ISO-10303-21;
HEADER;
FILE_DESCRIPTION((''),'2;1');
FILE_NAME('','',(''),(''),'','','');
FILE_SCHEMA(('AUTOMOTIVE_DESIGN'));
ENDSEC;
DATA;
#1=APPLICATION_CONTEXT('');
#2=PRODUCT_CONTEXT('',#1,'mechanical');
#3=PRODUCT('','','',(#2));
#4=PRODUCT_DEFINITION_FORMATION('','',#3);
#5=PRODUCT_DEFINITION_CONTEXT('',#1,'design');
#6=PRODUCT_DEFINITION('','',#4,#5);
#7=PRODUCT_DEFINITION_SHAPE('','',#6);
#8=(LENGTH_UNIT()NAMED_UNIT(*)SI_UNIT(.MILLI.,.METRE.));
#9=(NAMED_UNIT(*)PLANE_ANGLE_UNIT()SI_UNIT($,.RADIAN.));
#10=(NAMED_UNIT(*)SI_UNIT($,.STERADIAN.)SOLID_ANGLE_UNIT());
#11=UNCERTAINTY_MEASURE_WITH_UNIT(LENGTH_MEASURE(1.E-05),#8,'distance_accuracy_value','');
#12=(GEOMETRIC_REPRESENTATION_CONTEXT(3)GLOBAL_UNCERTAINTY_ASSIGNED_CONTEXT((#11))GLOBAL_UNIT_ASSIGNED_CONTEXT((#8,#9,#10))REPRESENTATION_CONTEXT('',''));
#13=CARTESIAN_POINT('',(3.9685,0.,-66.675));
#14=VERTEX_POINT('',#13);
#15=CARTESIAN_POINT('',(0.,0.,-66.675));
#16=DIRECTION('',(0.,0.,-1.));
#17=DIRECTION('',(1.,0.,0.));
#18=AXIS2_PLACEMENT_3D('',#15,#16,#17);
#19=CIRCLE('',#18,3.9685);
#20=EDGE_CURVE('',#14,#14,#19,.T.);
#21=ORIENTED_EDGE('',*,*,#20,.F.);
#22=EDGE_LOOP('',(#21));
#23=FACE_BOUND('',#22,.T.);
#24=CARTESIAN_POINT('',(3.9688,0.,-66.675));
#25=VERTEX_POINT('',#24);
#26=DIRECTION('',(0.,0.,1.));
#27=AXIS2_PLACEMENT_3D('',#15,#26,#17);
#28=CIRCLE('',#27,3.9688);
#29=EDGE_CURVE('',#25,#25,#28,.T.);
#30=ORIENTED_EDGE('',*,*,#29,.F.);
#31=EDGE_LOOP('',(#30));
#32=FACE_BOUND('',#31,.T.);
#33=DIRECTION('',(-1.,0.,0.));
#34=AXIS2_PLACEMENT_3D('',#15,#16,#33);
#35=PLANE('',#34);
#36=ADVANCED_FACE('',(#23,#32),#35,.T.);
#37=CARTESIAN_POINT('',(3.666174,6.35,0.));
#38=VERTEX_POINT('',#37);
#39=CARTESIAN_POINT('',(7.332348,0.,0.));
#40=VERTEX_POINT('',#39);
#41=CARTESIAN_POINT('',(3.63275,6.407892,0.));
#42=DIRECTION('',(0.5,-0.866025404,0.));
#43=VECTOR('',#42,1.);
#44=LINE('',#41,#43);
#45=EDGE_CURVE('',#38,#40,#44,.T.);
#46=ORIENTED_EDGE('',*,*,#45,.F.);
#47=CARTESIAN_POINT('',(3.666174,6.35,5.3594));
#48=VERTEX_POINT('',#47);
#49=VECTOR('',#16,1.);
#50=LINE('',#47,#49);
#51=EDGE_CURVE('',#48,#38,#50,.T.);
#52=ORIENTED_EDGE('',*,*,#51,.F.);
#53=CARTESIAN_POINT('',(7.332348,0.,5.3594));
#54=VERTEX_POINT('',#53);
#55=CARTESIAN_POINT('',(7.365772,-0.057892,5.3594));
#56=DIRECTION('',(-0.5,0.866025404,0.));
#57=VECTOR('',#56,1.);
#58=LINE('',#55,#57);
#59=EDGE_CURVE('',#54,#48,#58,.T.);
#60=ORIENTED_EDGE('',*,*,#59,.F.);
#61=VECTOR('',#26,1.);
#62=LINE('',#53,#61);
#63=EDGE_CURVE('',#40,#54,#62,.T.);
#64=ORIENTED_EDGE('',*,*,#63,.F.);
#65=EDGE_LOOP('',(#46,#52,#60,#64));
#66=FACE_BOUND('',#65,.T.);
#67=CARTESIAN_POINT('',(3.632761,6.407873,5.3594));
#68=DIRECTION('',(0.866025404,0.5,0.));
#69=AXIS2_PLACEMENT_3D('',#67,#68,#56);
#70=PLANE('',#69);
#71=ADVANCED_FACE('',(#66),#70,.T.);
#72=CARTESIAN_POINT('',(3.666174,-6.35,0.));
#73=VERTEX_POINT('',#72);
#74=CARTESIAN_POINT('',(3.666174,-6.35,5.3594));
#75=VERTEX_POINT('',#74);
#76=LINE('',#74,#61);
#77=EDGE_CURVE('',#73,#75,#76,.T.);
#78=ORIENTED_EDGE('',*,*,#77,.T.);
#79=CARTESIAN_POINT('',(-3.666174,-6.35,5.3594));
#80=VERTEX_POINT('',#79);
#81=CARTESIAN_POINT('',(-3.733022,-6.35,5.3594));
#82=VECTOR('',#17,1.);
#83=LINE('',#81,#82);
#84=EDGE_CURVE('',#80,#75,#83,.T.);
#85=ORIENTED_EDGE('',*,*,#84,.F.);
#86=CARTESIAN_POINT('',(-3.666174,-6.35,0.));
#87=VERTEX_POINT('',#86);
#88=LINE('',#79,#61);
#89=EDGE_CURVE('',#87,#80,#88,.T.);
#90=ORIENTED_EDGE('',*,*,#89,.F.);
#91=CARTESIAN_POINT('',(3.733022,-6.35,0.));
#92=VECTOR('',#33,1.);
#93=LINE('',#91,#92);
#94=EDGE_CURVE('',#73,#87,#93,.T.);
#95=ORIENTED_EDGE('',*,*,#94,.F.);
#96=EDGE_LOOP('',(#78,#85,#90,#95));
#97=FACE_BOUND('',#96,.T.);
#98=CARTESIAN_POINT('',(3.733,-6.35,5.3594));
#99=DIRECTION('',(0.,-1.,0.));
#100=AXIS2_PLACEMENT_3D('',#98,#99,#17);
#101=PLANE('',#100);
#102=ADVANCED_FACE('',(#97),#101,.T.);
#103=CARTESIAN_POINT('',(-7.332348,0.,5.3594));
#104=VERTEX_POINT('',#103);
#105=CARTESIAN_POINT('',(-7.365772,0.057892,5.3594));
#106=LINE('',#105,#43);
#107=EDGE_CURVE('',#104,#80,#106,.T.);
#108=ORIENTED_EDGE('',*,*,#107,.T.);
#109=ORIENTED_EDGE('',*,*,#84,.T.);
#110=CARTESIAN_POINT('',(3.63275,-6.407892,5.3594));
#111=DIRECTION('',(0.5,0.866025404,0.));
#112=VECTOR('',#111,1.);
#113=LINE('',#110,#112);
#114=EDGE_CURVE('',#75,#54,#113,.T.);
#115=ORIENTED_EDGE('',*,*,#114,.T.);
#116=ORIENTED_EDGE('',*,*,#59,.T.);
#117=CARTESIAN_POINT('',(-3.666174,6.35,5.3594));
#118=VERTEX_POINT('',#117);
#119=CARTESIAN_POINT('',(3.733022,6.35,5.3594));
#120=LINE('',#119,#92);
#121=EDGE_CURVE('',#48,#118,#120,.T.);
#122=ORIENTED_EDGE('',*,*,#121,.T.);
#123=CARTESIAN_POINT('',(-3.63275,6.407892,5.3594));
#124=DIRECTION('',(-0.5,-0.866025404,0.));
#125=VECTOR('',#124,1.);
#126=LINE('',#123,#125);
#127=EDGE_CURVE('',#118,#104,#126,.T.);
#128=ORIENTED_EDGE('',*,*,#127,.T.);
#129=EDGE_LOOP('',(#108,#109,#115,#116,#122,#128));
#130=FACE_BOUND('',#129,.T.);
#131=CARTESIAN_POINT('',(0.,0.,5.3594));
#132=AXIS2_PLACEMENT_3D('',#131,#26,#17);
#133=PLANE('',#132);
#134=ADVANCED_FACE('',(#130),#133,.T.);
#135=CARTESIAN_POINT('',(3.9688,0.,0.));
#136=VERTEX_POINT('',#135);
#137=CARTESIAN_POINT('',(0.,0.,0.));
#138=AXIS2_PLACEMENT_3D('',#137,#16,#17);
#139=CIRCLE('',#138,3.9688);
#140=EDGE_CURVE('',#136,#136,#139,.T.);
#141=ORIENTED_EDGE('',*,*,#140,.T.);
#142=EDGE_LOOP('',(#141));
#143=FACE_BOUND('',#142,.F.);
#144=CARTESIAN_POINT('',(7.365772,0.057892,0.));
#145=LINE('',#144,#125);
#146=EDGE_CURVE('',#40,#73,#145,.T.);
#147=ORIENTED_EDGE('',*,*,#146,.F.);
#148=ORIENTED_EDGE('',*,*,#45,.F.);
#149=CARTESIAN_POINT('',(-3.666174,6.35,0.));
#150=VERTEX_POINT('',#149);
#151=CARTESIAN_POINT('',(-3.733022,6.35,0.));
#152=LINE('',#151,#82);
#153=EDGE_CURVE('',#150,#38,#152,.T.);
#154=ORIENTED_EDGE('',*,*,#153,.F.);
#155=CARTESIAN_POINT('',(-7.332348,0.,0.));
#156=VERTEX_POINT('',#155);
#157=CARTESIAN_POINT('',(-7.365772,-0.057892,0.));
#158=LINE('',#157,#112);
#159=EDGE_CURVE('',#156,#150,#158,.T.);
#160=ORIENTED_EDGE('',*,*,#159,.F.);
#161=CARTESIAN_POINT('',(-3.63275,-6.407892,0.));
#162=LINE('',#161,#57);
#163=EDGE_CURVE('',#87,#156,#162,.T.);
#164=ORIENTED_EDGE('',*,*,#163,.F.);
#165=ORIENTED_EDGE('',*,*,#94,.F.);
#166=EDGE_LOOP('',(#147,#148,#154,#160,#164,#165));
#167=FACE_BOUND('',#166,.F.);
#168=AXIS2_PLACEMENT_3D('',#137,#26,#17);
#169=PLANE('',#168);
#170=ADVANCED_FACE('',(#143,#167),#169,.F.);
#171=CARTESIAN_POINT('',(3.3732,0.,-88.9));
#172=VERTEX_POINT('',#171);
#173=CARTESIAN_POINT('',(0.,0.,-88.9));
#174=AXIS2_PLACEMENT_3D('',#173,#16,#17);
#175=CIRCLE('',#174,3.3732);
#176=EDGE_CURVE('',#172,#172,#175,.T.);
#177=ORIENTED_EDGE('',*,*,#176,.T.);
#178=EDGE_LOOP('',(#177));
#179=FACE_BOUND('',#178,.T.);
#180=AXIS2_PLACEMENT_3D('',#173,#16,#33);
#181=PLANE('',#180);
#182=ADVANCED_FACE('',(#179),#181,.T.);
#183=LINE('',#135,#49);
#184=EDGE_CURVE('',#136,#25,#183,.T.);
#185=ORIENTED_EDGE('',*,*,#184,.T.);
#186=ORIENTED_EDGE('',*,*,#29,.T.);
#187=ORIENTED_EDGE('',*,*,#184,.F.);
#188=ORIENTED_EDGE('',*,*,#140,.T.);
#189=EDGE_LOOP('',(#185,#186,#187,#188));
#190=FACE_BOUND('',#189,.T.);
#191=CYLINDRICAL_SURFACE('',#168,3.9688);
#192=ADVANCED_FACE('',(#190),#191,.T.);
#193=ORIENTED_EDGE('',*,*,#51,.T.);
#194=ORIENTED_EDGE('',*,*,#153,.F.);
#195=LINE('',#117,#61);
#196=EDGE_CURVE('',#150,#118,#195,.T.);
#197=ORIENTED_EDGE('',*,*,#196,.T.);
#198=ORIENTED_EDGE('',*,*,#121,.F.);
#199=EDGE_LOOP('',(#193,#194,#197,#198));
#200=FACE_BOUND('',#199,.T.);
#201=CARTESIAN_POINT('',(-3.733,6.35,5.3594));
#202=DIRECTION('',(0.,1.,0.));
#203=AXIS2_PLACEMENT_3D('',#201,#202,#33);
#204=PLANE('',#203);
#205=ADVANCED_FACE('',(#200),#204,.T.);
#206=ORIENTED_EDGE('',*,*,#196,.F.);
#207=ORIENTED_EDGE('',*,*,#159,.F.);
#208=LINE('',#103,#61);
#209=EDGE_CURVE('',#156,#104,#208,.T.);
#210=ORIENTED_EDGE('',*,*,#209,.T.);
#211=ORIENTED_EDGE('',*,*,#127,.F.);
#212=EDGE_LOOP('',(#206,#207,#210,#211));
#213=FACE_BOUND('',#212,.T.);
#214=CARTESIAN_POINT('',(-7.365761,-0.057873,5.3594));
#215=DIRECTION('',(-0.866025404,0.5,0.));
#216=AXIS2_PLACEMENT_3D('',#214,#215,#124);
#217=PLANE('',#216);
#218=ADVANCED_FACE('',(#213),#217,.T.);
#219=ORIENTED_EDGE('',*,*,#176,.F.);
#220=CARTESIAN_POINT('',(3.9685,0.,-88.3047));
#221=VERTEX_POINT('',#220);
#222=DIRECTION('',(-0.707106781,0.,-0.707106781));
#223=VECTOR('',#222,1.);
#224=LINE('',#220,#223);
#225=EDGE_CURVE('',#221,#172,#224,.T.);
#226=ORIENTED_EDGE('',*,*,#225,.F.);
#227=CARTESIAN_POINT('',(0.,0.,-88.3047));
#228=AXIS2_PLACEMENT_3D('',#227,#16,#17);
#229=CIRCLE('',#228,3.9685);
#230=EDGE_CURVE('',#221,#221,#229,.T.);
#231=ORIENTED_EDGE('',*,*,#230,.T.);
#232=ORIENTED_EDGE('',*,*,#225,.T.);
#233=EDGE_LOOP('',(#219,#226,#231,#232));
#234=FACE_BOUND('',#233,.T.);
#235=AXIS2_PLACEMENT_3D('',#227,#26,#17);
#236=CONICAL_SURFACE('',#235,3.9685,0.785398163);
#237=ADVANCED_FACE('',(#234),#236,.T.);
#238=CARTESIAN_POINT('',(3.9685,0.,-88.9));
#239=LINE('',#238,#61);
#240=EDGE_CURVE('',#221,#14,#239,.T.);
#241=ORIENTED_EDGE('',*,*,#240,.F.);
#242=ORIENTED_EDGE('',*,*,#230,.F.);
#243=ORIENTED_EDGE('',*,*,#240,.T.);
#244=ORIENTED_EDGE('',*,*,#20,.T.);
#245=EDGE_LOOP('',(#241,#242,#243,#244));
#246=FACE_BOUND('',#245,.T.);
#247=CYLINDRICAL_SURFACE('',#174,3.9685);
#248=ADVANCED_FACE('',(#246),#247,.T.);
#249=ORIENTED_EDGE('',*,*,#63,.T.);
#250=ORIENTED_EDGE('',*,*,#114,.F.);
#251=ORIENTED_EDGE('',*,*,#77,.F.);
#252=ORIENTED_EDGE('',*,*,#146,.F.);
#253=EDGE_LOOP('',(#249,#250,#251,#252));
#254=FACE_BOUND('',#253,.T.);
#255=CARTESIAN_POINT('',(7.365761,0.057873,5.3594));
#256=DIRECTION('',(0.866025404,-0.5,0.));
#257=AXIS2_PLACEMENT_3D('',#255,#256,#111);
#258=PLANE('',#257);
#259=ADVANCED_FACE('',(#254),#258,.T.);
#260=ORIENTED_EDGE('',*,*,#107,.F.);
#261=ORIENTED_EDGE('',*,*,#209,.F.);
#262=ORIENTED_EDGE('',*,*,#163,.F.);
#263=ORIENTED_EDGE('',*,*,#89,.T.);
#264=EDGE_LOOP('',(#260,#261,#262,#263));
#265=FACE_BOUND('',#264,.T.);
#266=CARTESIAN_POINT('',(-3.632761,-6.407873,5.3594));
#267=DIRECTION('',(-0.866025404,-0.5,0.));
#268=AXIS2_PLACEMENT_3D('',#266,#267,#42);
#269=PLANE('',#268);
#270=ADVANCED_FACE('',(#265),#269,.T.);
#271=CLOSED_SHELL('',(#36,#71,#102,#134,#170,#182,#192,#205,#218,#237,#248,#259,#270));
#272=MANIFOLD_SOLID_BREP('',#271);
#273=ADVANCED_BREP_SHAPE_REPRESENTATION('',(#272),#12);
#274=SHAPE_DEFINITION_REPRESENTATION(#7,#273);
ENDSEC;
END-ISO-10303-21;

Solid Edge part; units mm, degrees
sketch "Sketch1" plane through (0, 0, 0) normal (0, 0, 1) x (1, 0, 0)
  circle A0 centre (0, 0) radius 7.366
  dimension "D1" = 14.732
extrude "Protrusion1" add sketch "Sketch1" along normal blind 5.3594
sketch "Sketch2" plane through (0, 0, 0) normal (0, 0, -1) x (1, 0, 0)
  circle A0 centre (0, 0) radius 3.9688
extrude "Protrusion2" add sketch "Sketch2" along normal blind 88.9
sketch "Sketch3" plane through (0, 0, -88.9) normal (0, 0, -1) x (1, 0, 0)
  circle A0 centre (0, 0) radius 3.9685
extrude "Cutout1" cut sketch "Sketch3" against normal blind 22.225 flip side to cut
chamfer "Chamfer_1" distance 0.5953 angle 45 1 edges at (-3.9685, 0, -88.9)
sketch "Sketch4" plane through (0, 0, 5.3594) normal (0, 0, 1) x (1, 0, 0)
  line L0 (-3.733, 6.35) -> (3.733, 6.35)
  dimension "D1" = 12.7
extrude "Cutout2" cut sketch "Sketch4" against normal up to next material side at (0, 6.4, 5.3594)
pattern_circular "Pattern1" count 6 over 360 about axis through (0, 0, 5.3594) along (0, 0, 1) of "Cutout2"
properties part number "117664"
